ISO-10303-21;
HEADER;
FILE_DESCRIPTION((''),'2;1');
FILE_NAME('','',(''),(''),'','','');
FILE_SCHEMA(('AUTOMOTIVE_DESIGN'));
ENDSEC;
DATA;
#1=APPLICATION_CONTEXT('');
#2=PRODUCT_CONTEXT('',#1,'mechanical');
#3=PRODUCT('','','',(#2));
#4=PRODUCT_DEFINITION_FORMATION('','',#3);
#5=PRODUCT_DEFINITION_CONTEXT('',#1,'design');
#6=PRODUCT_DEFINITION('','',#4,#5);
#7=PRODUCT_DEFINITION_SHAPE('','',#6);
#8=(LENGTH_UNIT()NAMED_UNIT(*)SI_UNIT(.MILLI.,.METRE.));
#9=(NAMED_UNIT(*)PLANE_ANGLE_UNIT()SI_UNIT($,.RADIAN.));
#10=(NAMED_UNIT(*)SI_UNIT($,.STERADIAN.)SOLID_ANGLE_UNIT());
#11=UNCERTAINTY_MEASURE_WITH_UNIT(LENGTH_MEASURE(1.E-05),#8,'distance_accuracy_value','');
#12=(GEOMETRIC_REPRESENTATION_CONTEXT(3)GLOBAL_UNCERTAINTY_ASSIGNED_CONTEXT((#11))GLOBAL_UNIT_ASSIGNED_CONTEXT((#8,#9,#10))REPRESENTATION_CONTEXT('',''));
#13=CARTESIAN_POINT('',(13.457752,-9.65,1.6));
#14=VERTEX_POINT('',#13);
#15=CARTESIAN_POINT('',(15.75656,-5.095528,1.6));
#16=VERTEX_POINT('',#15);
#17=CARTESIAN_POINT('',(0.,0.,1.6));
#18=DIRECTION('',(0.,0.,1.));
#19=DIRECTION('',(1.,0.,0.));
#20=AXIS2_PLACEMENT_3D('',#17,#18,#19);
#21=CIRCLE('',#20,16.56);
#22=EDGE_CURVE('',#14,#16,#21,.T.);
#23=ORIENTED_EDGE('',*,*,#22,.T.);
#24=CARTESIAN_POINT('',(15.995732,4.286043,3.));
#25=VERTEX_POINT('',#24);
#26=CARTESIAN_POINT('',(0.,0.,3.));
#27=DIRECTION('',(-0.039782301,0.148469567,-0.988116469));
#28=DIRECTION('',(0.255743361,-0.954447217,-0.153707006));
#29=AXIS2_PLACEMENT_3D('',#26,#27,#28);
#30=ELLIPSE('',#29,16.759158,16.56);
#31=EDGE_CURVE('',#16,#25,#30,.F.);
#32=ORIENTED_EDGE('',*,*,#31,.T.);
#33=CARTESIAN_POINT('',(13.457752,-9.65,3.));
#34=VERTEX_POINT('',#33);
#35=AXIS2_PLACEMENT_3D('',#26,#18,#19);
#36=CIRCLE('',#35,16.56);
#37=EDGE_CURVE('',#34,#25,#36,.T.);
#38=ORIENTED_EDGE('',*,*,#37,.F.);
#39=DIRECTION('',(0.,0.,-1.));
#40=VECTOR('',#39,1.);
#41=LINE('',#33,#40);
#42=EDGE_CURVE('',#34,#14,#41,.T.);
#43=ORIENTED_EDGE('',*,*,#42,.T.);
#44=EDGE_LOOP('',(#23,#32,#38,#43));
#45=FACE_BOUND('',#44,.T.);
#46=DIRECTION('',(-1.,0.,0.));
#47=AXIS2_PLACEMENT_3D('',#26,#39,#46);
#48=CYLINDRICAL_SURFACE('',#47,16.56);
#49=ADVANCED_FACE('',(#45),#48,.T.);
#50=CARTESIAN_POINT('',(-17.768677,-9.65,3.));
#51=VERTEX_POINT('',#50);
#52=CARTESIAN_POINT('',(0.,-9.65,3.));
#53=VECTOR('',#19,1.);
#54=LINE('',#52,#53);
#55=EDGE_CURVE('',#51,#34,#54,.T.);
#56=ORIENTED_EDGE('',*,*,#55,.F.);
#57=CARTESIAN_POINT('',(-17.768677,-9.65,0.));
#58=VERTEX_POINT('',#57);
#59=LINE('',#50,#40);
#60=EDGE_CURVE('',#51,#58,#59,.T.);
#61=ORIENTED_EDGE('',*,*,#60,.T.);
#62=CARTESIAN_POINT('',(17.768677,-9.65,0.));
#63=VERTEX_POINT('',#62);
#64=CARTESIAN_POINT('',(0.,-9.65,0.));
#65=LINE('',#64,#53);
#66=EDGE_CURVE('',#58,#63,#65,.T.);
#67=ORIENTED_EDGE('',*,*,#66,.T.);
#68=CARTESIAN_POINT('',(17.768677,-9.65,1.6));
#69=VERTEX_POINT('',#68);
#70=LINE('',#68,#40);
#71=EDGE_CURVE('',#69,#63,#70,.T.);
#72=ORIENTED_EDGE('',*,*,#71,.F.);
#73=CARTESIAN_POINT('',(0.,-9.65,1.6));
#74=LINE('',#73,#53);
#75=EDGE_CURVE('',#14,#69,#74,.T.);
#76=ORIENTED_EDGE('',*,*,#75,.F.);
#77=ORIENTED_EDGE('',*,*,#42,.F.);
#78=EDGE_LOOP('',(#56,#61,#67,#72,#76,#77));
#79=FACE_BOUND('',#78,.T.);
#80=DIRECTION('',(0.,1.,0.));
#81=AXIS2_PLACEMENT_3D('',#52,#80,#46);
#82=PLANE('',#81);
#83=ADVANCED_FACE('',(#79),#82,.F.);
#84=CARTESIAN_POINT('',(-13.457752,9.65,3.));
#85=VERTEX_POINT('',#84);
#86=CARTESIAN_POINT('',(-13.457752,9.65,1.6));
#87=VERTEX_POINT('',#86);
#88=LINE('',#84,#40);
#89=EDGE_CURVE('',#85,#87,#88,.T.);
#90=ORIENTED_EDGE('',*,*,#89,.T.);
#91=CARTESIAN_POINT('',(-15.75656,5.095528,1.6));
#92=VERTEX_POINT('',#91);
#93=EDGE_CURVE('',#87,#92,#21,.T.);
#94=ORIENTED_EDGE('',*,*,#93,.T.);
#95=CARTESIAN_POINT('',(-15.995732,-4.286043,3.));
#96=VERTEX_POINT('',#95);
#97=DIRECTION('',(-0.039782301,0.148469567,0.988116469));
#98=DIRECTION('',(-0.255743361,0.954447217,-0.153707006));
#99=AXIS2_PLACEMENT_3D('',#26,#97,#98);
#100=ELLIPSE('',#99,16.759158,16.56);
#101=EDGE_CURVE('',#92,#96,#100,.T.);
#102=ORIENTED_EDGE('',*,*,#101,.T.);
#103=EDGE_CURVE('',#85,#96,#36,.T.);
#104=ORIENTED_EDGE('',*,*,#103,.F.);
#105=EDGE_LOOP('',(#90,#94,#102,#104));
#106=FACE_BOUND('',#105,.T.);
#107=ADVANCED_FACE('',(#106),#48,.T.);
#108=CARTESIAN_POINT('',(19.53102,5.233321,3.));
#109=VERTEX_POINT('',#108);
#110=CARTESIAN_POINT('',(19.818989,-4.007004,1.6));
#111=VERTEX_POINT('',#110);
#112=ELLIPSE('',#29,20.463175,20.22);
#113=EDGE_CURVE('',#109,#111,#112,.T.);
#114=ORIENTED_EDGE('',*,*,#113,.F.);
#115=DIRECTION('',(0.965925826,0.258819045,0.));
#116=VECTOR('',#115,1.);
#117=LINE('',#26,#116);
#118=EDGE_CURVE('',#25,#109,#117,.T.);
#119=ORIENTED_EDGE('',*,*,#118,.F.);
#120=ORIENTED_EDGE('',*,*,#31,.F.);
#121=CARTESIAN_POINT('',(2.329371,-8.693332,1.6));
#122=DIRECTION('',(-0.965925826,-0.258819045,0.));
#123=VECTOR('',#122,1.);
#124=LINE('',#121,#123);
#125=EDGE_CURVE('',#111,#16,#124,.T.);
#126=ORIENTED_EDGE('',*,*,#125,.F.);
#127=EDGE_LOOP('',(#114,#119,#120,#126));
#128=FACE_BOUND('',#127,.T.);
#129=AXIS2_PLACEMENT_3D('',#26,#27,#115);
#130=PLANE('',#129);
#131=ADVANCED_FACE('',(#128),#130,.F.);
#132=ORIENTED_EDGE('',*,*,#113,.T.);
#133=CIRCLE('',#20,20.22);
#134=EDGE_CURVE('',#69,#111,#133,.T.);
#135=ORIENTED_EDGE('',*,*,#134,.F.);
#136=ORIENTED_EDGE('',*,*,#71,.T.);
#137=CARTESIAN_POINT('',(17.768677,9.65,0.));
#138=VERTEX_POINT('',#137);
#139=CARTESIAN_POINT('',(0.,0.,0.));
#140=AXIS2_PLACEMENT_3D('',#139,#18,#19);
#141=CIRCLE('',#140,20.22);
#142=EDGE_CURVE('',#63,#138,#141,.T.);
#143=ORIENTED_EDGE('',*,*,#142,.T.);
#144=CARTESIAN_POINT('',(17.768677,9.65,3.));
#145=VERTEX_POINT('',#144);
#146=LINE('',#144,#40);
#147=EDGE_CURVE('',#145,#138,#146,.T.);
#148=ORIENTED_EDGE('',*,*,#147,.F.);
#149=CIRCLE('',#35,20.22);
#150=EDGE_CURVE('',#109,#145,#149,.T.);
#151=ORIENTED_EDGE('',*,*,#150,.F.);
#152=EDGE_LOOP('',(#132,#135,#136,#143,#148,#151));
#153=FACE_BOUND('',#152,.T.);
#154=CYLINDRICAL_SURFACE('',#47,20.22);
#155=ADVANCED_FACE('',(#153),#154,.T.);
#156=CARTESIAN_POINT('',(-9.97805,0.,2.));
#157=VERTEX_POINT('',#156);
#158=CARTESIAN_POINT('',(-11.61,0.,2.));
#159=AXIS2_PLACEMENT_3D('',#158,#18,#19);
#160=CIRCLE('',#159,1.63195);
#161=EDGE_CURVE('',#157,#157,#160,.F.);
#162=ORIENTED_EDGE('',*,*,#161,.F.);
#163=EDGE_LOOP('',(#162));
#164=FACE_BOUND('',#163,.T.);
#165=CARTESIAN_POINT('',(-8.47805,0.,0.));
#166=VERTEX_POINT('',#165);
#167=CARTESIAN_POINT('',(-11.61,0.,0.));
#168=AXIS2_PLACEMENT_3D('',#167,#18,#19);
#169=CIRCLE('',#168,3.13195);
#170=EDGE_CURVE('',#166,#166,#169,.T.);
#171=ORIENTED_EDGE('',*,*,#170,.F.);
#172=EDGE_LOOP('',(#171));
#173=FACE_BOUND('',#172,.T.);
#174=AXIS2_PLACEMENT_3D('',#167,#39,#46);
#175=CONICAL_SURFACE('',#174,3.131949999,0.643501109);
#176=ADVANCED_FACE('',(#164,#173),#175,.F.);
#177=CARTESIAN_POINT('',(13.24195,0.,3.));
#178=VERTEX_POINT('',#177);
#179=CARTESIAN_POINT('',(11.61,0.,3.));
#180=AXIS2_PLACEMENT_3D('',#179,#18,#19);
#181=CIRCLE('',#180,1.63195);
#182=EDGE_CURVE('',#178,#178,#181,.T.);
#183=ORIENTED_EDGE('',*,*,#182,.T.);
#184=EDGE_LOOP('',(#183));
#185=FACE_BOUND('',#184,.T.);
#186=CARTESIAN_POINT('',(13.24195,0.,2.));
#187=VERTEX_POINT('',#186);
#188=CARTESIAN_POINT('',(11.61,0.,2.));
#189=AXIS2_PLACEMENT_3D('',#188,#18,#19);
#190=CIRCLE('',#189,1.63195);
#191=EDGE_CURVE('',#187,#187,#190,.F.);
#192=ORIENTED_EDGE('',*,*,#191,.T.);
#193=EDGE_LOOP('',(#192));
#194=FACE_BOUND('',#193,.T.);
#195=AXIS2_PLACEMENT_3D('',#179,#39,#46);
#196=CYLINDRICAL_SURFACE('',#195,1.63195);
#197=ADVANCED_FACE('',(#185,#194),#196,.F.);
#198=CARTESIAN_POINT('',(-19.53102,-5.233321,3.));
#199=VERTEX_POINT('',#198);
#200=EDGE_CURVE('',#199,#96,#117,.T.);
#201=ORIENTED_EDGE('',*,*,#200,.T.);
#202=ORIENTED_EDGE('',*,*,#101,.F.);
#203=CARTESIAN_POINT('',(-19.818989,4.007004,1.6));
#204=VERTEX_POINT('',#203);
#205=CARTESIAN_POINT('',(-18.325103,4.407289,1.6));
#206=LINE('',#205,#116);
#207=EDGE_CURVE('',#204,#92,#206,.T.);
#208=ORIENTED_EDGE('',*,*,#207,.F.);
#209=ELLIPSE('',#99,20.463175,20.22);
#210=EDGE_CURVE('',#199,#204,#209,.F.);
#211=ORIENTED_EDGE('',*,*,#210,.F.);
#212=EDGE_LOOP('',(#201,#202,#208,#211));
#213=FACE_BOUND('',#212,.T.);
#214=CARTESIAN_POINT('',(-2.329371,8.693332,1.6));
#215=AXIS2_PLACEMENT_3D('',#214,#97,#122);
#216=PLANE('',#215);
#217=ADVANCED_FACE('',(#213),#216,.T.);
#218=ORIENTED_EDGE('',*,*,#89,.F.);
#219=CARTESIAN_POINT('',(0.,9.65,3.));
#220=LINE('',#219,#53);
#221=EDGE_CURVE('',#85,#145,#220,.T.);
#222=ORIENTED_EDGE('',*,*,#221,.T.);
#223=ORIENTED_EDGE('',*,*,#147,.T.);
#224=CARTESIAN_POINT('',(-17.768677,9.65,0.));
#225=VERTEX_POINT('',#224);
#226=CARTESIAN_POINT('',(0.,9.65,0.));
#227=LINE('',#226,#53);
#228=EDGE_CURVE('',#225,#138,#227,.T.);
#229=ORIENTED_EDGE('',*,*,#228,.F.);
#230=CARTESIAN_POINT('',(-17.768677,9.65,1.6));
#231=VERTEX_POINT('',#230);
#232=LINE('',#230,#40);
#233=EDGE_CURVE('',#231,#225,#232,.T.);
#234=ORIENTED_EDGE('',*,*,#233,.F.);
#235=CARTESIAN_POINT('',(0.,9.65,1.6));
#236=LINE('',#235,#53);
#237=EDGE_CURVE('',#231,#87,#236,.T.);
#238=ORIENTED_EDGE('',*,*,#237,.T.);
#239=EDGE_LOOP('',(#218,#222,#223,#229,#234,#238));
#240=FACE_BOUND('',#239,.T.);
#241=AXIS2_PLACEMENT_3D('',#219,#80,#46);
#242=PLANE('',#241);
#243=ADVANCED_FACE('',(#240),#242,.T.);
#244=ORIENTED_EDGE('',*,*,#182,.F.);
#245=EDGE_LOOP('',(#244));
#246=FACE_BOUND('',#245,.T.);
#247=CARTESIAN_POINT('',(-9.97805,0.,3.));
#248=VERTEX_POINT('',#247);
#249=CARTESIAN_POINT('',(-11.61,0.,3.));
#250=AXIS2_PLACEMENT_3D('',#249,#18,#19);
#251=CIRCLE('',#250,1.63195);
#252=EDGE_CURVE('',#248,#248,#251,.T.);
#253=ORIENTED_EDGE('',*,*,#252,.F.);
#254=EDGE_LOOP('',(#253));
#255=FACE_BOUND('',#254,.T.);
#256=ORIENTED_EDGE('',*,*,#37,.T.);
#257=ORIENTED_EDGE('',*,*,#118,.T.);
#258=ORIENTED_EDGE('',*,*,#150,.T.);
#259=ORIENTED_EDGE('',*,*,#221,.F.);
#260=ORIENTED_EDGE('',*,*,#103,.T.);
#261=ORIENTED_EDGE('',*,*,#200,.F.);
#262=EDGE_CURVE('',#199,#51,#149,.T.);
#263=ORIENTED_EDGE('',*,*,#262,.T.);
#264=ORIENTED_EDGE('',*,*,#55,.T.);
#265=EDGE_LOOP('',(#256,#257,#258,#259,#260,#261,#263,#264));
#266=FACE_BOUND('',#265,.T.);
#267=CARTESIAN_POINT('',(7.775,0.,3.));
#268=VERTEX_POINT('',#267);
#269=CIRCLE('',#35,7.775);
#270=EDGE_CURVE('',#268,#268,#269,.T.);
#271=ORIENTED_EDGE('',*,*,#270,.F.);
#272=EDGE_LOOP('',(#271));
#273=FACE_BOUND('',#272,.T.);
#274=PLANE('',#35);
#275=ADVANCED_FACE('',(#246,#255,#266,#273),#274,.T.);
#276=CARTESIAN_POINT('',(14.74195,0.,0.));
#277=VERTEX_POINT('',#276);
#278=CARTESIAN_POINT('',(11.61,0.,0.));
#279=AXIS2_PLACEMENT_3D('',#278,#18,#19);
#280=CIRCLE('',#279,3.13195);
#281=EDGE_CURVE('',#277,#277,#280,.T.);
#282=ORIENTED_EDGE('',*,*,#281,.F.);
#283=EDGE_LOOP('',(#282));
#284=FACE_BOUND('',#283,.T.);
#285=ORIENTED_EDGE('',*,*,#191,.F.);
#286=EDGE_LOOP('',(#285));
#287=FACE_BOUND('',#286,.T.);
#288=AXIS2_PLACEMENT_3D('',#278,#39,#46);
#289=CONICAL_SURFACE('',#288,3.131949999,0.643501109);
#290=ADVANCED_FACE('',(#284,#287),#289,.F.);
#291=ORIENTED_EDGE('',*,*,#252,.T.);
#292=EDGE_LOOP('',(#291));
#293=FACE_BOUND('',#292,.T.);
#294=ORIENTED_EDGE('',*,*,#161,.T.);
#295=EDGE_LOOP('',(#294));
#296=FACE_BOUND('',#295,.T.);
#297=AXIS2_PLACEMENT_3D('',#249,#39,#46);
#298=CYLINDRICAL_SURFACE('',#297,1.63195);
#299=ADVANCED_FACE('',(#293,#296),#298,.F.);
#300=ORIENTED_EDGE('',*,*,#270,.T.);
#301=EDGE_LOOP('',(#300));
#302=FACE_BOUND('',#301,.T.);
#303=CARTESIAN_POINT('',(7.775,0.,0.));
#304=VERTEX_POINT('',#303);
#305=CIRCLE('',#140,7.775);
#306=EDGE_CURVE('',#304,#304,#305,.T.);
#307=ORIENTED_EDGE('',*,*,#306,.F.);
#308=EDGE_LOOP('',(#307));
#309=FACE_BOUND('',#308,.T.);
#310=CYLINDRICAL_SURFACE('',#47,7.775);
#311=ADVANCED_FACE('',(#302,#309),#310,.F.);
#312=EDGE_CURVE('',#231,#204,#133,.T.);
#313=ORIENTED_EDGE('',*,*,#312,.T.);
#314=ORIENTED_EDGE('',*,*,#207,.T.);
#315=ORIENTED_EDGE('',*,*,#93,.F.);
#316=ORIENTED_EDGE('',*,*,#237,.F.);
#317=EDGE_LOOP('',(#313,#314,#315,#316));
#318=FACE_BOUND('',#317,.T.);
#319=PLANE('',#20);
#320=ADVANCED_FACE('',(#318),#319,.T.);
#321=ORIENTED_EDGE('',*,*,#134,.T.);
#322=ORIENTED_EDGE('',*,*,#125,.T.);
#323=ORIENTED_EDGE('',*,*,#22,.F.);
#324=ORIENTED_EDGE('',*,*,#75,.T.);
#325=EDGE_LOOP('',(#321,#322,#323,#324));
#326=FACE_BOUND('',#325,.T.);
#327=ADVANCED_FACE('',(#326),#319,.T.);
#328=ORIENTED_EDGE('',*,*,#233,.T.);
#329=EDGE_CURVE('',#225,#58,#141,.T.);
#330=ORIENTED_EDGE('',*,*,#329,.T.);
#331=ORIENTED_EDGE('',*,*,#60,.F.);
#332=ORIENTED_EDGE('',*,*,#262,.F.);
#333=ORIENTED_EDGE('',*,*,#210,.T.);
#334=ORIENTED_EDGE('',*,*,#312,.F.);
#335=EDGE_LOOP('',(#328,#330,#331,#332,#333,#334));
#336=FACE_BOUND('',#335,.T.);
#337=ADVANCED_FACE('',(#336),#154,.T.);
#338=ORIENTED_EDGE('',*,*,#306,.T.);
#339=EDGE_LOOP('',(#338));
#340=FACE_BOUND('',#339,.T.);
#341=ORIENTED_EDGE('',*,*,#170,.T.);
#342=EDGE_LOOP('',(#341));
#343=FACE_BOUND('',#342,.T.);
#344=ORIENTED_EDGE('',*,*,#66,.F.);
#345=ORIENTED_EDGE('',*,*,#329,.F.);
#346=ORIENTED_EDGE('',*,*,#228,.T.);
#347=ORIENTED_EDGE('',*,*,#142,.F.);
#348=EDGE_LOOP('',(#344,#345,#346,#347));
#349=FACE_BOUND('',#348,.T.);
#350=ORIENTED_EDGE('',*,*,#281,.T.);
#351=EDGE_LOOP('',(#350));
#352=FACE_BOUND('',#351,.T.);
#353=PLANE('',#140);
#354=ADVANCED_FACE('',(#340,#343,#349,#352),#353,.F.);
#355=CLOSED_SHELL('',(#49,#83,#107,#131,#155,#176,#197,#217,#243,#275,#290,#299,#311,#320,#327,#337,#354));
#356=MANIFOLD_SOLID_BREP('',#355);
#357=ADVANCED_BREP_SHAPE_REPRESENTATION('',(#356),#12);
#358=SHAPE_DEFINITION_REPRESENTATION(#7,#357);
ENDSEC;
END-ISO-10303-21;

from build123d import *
from OCP.BRepFilletAPI import BRepFilletAPI_MakeChamfer

# Parameters (mm, degrees)
SKETCH1_R           = 7.774999999999999
SKETCH1_R_2         = 1.6319499986664014
BOSS_EXTRUDE1_DEPTH = 3
SKETCH1_3_R         = 1.6319499986664014
SKETCH1_3_R_2       = 7.774999999999999
BOSS_EXTRUDE2_DEPTH = 1.6
CHAMFER1_SIZE       = 2
CHAMFER1_SIZE2      = 1.5
CHAMFER2_SIZE2      = 1.4
CHAMFER2_SIZE       = 9
CHAMFER3_SIZE       = 1.4
CHAMFER3_SIZE_2     = 9


# Some blends are built 0.0001 mm under size
with BuildPart() as part:
    # Sketch1 → Boss-Extrude1 (new body)
    with BuildSketch(Plane.XY):
        with BuildLine():
            Line((-15.995731683346964, -4.286043386897756), (-19.531020207564957, -5.233321091972986))
            ThreePointArc((-19.53102020756496, -5.233321091972988), (-18.780139119855487, -7.49364895353884), (-17.76867749721403, -9.650000000000002))
            Line((-17.76867749721403, -9.65), (13.457752412643053, -9.650000000000004))
            ThreePointArc((13.457752412643053, -9.650000000000004), (16.29203049556925, -2.967042691206455), (15.995731683346978, 4.286043386897719))
            Line((15.995731683346953, 4.286043386897752), (19.531020207564957, 5.233321091972986))
            ThreePointArc((19.531020207564957, 5.233321091972985), (18.78013911985548, 7.493648953538841), (17.768677497214025, 9.650000000000002))
            Line((17.76867749721402, 9.650000000000002), (-13.457752412643053, 9.650000000000002))
            ThreePointArc((-13.457752412643051, 9.650000000000002), (-16.292030495569243, 2.967042691206453), (-15.995731683346973, -4.286043386897722))
        make_face()
        Circle(SKETCH1_R, mode=Mode.SUBTRACT)
        with Locations((11.610000000000001, 2.84e-15)):
            Circle(SKETCH1_R_2, mode=Mode.SUBTRACT)
        with Locations((-11.609999999999998, 0)):
            Circle(SKETCH1_R_2, mode=Mode.SUBTRACT)
    extrude(amount=BOSS_EXTRUDE1_DEPTH)

    # Sketch1<3> → Boss-Extrude2 (add)
    with BuildSketch(Plane.XY):
        with BuildLine():
            Line((-17.768677497214025, -9.649999999999999), (17.76867749721402, -9.650000000000002))
            ThreePointArc((17.76867749721402, -9.650000000000002), (20.22, 0), (17.76867749721402, 9.650000000000002))
            Line((17.76867749721402, 9.650000000000002), (-17.768677497214025, 9.649999999999999))
            ThreePointArc((-17.768677497214025, 9.649999999999999), (-20.220000000000002, 2.48e-15), (-17.768677497214025, -9.649999999999999))
        make_face()
        with Locations((-11.609999999999998, 0)):
            Circle(SKETCH1_3_R, mode=Mode.SUBTRACT)
        with Locations((11.610000000000001, 2.84e-15)):
            Circle(SKETCH1_3_R, mode=Mode.SUBTRACT)
        Circle(SKETCH1_3_R_2, mode=Mode.SUBTRACT)
    extrude(amount=BOSS_EXTRUDE2_DEPTH)

    # Chamfer1: one chamfer whose edges measure the first distance from different faces: ONE call of the kernel's chamfer builder (chamfer() names one face for all edges)
    chamfer1_edges_1 = [part.edges().sort_by_distance(p)[0] for p in [
        (-13.2419499986664, 2e-16, 0),
    ]]
    chamfer1_side_1 = [part.faces().sort_by_distance(p)[0] for p in [
        (-13.2419499986664, 2e-16, 1.5),
    ]]
    chamfer1_edges_2 = [part.edges().sort_by_distance(p)[0] for p in [
        (9.9780500013336, 3.04e-15, 0),
    ]]
    chamfer1_side_2 = [part.faces().sort_by_distance(p)[0] for p in [
        (9.9780500013336, 3.04e-15, 1.5),
    ]]
    chamfer1 = BRepFilletAPI_MakeChamfer(part.part.solid().wrapped)
    for e in chamfer1_edges_1:
        chamfer1.Add(CHAMFER1_SIZE, CHAMFER1_SIZE2, e.wrapped, chamfer1_side_1[0].wrapped)  # the first distance lies on this face
    for e in chamfer1_edges_2:
        chamfer1.Add(CHAMFER1_SIZE, CHAMFER1_SIZE2, e.wrapped, chamfer1_side_2[0].wrapped)  # the first distance lies on this face
    add(Compound.cast(chamfer1.Shape()), mode=Mode.REPLACE)

    # Chamfer2
    chamfer2_edges = [part.edges().sort_by_distance(p)[0] for p in [
        (-17.763375945455962, -4.759682239435371, 1.6),
    ]]
    chamfer2_side = [part.faces().sort_by_distance(p)[0] for p in [
        (-17.770622878718832, -4.732636316299277, 1.6),
    ]]
    chamfer(chamfer2_edges, length=CHAMFER2_SIZE - 0.0001, length2=CHAMFER2_SIZE2 - 0.0001, reference=chamfer2_side[0])  # a hair under: the kernel refuses the full size

    # Chamfer3
    # the kernel refuses this chamfer: 9, 1.4 mm, written as the material it adds along each edge
    with BuildSketch(Plane(origin=(-6.596997055985572, -1.7676600336218398, 1.6), x_dir=(-0.06145306059893889, 0.22934594443584813, 0.9714030878651004), z_dir=(0.9659258262890681, 0.2588190451025218, 0))) as chamfer3_piece_1_section:
        Polygon((CHAMFER3_SIZE * 0.971403087865, CHAMFER3_SIZE * 0.237436393348), (-CHAMFER3_SIZE_2 * 0.237436393348, CHAMFER3_SIZE_2 * 0.971403087865), (0, 0), align=None)
    chamfer3_piece_1 = extrude(amount=50.43942782859462, mode=Mode.PRIVATE)
    chamfer3_piece_1 = split(chamfer3_piece_1, bisect_by=Plane(origin=(18.152512128886663, 1.3968714371036275, 3), z_dir=(0, 0, -1)), keep=Keep.TOP, mode=Mode.PRIVATE)
    chamfer3_piece_1 = chamfer3_piece_1 & Plane(origin=(-9.0949e-13, -3.5172e-13, 1.9557710563894077), x_dir=(0.9659258262890668, 0.2588190451025265, 0), z_dir=(0, 0, -1)) * Cylinder(20.22000000000097, 136, mode=Mode.PRIVATE)
    chamfer3_piece_1 = chamfer3_piece_1 - Plane(origin=(2.665e-14, -4.11e-15, 1.9557710563894077), x_dir=(0.8126662084929376, -0.5827294685990347, 0), z_dir=(0, 0, -1)) * Cylinder(16.559999999999974, 136, mode=Mode.PRIVATE)
    add(chamfer3_piece_1)


solid = part.part
